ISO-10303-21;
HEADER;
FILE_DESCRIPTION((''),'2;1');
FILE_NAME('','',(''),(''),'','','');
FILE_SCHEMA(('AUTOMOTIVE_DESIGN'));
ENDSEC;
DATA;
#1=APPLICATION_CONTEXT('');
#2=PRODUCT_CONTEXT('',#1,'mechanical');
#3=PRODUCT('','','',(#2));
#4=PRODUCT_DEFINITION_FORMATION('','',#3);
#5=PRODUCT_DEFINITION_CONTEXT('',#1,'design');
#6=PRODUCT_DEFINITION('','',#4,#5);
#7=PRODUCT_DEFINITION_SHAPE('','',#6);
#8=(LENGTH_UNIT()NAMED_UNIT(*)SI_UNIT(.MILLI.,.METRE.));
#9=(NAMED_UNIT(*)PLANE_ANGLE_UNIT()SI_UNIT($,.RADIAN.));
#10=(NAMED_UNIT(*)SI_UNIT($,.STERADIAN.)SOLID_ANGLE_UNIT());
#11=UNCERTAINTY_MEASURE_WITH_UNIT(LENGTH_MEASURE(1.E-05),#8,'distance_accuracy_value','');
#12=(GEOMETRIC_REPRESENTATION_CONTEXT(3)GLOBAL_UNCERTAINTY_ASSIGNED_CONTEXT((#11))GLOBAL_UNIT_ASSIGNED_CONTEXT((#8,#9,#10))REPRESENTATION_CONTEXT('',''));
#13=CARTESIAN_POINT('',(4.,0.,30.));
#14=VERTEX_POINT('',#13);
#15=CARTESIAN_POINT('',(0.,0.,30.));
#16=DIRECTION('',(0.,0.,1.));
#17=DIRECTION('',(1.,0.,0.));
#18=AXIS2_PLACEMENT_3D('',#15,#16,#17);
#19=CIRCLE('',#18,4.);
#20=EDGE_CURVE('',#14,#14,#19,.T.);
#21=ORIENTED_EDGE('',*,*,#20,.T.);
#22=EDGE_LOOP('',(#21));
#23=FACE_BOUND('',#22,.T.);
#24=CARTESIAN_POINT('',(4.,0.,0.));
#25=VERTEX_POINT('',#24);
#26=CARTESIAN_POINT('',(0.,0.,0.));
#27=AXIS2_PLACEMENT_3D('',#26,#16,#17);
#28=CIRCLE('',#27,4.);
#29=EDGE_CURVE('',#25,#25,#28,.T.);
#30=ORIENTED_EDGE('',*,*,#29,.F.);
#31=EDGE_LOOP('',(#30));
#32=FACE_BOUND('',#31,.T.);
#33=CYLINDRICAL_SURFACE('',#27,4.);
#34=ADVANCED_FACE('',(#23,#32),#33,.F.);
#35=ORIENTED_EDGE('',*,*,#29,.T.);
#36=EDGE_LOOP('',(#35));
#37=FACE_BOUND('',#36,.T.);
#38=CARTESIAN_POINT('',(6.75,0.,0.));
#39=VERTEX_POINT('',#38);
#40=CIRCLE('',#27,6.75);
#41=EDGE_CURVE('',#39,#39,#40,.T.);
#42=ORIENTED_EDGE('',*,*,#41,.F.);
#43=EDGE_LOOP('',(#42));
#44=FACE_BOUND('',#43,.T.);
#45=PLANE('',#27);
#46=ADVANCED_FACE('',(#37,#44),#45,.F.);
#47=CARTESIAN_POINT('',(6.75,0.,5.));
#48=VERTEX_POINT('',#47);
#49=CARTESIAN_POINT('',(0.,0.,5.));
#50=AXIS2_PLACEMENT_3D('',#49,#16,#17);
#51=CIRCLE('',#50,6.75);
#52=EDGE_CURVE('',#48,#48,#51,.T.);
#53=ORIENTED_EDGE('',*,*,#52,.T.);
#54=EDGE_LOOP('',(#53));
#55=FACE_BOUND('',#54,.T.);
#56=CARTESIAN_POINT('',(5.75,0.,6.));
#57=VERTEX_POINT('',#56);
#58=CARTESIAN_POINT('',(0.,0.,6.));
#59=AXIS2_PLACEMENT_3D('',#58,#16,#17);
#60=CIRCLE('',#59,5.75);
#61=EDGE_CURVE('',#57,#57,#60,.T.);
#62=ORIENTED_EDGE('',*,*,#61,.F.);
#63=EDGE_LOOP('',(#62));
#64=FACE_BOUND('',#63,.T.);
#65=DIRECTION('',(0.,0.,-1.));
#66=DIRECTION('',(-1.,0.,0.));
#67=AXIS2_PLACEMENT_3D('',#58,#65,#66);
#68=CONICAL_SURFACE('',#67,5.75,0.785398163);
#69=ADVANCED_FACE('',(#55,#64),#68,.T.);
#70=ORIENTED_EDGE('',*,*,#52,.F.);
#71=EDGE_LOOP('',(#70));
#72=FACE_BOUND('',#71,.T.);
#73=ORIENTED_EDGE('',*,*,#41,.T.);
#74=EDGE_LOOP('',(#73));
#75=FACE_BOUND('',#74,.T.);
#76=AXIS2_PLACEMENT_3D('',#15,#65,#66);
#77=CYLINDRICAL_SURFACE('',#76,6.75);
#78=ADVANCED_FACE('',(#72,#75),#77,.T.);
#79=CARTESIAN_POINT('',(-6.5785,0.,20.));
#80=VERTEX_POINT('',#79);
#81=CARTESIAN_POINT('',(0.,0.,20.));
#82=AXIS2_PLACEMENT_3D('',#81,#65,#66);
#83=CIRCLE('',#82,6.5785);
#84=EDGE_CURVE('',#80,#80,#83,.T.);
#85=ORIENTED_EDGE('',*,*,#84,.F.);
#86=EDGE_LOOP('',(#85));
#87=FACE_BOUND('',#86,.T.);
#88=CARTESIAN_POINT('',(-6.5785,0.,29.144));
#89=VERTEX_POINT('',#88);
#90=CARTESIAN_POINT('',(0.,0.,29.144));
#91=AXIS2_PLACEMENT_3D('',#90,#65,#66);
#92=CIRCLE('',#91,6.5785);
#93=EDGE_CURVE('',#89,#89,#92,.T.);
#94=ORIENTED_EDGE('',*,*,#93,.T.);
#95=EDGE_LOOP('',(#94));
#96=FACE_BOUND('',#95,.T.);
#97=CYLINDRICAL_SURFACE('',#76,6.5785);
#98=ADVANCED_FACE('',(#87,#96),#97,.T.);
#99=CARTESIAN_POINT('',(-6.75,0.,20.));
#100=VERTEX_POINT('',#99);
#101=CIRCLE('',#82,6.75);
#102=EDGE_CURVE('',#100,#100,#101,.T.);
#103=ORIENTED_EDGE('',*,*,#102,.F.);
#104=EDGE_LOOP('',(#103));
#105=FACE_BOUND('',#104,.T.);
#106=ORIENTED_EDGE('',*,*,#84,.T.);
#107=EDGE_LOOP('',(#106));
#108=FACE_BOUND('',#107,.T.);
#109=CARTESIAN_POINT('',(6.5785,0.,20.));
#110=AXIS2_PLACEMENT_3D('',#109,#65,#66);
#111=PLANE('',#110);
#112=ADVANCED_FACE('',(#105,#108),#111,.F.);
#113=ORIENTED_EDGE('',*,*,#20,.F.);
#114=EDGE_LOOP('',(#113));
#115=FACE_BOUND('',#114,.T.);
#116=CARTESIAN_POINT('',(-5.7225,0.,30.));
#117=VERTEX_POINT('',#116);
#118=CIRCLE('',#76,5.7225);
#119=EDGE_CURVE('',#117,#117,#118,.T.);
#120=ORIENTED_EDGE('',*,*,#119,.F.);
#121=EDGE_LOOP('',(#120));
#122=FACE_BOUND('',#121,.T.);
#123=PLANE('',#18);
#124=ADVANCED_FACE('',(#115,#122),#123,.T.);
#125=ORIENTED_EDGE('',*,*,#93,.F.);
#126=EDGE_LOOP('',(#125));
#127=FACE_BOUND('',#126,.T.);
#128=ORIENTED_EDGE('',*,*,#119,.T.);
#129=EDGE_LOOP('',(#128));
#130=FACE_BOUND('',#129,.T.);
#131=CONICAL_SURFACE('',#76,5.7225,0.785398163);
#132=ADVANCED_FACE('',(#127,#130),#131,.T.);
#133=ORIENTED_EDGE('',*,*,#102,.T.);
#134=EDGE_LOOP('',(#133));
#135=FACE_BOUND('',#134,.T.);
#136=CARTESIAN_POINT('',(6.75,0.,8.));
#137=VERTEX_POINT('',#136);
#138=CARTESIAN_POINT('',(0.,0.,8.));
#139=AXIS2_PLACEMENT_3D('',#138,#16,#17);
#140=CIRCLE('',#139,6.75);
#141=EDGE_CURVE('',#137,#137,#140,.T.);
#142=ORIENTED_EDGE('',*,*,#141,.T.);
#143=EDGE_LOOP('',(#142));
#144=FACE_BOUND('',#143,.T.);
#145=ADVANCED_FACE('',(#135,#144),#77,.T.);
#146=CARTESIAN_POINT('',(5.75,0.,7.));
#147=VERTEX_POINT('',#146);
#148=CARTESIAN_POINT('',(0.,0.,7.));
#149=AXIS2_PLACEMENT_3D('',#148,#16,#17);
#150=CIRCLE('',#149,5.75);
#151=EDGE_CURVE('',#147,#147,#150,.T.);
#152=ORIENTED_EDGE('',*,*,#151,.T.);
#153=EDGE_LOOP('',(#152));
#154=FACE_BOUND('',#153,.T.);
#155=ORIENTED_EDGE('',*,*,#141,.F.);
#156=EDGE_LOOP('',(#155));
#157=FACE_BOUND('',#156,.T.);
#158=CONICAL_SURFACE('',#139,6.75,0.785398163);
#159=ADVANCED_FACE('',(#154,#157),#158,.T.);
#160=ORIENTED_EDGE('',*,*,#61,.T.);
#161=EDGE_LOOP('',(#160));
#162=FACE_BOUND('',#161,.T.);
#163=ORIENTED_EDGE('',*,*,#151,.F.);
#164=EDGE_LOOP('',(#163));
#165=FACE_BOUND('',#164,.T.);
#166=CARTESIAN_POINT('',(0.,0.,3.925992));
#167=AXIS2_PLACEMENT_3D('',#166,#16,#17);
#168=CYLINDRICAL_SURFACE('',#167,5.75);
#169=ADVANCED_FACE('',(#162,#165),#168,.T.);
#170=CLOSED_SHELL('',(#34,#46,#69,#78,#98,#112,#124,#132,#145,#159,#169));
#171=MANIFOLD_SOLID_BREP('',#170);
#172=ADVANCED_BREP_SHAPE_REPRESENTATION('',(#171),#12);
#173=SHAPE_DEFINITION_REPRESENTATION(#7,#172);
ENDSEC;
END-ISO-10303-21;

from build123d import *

# Parameters (mm, degrees)
SKETCH_1_R          = 6.75
EXTRUDE_1_DEPTH     = 30
SKETCH_3_R          = 4
CUT_EXTRUDE_1_DEPTH = 32.482137793


# Read off the part's stored shape, not the designer's step: G1/4 直管螺纹 螺柱1
with BuildPart() as part:
    # 草图1 → 凸台-拉伸1 (new body)
    with BuildSketch(Plane.XY):
        Circle(SKETCH_1_R)
    extrude(amount=EXTRUDE_1_DEPTH)

    # 草图2 → 切除-旋转1 (revolve, cut)
    with BuildSketch(Plane(origin=(0, 0, 0), x_dir=(0, 0, -1), z_dir=(1, 0, 0)), mode=Mode.PRIVATE) as cut_revolve_1_sk:
        Polygon((-8, 6.75), (-7, 5.75), (-6, 5.75), (-5, 6.75), align=None)
    revolve(cut_revolve_1_sk.sketch.rotate(Axis((0, 0, 3.925992106), (0, 0, -1)), 90), axis=Axis((0, 0, 3.925992106), (0, 0, -1)), mode=Mode.SUBTRACT)

    # 草图3 → 切除-拉伸1 (cut, through all)
    with BuildSketch(Plane.XY.offset(30)):
        Circle(SKETCH_3_R)
    extrude(amount=-CUT_EXTRUDE_1_DEPTH, mode=Mode.SUBTRACT)

    # G1/4 直管螺纹 螺柱1 outline → G1/4 直管螺纹 螺柱1 (revolve, cut)
    with BuildSketch(Plane.XZ):
        Polygon((6.75, 30), (5.7225, 30), (6.5785, 29.144), (6.5785, 20), (6.75, 20), align=None)
    revolve(axis=Axis((0, 0, 0), (0, 0, 1)), mode=Mode.SUBTRACT)


solid = part.part
